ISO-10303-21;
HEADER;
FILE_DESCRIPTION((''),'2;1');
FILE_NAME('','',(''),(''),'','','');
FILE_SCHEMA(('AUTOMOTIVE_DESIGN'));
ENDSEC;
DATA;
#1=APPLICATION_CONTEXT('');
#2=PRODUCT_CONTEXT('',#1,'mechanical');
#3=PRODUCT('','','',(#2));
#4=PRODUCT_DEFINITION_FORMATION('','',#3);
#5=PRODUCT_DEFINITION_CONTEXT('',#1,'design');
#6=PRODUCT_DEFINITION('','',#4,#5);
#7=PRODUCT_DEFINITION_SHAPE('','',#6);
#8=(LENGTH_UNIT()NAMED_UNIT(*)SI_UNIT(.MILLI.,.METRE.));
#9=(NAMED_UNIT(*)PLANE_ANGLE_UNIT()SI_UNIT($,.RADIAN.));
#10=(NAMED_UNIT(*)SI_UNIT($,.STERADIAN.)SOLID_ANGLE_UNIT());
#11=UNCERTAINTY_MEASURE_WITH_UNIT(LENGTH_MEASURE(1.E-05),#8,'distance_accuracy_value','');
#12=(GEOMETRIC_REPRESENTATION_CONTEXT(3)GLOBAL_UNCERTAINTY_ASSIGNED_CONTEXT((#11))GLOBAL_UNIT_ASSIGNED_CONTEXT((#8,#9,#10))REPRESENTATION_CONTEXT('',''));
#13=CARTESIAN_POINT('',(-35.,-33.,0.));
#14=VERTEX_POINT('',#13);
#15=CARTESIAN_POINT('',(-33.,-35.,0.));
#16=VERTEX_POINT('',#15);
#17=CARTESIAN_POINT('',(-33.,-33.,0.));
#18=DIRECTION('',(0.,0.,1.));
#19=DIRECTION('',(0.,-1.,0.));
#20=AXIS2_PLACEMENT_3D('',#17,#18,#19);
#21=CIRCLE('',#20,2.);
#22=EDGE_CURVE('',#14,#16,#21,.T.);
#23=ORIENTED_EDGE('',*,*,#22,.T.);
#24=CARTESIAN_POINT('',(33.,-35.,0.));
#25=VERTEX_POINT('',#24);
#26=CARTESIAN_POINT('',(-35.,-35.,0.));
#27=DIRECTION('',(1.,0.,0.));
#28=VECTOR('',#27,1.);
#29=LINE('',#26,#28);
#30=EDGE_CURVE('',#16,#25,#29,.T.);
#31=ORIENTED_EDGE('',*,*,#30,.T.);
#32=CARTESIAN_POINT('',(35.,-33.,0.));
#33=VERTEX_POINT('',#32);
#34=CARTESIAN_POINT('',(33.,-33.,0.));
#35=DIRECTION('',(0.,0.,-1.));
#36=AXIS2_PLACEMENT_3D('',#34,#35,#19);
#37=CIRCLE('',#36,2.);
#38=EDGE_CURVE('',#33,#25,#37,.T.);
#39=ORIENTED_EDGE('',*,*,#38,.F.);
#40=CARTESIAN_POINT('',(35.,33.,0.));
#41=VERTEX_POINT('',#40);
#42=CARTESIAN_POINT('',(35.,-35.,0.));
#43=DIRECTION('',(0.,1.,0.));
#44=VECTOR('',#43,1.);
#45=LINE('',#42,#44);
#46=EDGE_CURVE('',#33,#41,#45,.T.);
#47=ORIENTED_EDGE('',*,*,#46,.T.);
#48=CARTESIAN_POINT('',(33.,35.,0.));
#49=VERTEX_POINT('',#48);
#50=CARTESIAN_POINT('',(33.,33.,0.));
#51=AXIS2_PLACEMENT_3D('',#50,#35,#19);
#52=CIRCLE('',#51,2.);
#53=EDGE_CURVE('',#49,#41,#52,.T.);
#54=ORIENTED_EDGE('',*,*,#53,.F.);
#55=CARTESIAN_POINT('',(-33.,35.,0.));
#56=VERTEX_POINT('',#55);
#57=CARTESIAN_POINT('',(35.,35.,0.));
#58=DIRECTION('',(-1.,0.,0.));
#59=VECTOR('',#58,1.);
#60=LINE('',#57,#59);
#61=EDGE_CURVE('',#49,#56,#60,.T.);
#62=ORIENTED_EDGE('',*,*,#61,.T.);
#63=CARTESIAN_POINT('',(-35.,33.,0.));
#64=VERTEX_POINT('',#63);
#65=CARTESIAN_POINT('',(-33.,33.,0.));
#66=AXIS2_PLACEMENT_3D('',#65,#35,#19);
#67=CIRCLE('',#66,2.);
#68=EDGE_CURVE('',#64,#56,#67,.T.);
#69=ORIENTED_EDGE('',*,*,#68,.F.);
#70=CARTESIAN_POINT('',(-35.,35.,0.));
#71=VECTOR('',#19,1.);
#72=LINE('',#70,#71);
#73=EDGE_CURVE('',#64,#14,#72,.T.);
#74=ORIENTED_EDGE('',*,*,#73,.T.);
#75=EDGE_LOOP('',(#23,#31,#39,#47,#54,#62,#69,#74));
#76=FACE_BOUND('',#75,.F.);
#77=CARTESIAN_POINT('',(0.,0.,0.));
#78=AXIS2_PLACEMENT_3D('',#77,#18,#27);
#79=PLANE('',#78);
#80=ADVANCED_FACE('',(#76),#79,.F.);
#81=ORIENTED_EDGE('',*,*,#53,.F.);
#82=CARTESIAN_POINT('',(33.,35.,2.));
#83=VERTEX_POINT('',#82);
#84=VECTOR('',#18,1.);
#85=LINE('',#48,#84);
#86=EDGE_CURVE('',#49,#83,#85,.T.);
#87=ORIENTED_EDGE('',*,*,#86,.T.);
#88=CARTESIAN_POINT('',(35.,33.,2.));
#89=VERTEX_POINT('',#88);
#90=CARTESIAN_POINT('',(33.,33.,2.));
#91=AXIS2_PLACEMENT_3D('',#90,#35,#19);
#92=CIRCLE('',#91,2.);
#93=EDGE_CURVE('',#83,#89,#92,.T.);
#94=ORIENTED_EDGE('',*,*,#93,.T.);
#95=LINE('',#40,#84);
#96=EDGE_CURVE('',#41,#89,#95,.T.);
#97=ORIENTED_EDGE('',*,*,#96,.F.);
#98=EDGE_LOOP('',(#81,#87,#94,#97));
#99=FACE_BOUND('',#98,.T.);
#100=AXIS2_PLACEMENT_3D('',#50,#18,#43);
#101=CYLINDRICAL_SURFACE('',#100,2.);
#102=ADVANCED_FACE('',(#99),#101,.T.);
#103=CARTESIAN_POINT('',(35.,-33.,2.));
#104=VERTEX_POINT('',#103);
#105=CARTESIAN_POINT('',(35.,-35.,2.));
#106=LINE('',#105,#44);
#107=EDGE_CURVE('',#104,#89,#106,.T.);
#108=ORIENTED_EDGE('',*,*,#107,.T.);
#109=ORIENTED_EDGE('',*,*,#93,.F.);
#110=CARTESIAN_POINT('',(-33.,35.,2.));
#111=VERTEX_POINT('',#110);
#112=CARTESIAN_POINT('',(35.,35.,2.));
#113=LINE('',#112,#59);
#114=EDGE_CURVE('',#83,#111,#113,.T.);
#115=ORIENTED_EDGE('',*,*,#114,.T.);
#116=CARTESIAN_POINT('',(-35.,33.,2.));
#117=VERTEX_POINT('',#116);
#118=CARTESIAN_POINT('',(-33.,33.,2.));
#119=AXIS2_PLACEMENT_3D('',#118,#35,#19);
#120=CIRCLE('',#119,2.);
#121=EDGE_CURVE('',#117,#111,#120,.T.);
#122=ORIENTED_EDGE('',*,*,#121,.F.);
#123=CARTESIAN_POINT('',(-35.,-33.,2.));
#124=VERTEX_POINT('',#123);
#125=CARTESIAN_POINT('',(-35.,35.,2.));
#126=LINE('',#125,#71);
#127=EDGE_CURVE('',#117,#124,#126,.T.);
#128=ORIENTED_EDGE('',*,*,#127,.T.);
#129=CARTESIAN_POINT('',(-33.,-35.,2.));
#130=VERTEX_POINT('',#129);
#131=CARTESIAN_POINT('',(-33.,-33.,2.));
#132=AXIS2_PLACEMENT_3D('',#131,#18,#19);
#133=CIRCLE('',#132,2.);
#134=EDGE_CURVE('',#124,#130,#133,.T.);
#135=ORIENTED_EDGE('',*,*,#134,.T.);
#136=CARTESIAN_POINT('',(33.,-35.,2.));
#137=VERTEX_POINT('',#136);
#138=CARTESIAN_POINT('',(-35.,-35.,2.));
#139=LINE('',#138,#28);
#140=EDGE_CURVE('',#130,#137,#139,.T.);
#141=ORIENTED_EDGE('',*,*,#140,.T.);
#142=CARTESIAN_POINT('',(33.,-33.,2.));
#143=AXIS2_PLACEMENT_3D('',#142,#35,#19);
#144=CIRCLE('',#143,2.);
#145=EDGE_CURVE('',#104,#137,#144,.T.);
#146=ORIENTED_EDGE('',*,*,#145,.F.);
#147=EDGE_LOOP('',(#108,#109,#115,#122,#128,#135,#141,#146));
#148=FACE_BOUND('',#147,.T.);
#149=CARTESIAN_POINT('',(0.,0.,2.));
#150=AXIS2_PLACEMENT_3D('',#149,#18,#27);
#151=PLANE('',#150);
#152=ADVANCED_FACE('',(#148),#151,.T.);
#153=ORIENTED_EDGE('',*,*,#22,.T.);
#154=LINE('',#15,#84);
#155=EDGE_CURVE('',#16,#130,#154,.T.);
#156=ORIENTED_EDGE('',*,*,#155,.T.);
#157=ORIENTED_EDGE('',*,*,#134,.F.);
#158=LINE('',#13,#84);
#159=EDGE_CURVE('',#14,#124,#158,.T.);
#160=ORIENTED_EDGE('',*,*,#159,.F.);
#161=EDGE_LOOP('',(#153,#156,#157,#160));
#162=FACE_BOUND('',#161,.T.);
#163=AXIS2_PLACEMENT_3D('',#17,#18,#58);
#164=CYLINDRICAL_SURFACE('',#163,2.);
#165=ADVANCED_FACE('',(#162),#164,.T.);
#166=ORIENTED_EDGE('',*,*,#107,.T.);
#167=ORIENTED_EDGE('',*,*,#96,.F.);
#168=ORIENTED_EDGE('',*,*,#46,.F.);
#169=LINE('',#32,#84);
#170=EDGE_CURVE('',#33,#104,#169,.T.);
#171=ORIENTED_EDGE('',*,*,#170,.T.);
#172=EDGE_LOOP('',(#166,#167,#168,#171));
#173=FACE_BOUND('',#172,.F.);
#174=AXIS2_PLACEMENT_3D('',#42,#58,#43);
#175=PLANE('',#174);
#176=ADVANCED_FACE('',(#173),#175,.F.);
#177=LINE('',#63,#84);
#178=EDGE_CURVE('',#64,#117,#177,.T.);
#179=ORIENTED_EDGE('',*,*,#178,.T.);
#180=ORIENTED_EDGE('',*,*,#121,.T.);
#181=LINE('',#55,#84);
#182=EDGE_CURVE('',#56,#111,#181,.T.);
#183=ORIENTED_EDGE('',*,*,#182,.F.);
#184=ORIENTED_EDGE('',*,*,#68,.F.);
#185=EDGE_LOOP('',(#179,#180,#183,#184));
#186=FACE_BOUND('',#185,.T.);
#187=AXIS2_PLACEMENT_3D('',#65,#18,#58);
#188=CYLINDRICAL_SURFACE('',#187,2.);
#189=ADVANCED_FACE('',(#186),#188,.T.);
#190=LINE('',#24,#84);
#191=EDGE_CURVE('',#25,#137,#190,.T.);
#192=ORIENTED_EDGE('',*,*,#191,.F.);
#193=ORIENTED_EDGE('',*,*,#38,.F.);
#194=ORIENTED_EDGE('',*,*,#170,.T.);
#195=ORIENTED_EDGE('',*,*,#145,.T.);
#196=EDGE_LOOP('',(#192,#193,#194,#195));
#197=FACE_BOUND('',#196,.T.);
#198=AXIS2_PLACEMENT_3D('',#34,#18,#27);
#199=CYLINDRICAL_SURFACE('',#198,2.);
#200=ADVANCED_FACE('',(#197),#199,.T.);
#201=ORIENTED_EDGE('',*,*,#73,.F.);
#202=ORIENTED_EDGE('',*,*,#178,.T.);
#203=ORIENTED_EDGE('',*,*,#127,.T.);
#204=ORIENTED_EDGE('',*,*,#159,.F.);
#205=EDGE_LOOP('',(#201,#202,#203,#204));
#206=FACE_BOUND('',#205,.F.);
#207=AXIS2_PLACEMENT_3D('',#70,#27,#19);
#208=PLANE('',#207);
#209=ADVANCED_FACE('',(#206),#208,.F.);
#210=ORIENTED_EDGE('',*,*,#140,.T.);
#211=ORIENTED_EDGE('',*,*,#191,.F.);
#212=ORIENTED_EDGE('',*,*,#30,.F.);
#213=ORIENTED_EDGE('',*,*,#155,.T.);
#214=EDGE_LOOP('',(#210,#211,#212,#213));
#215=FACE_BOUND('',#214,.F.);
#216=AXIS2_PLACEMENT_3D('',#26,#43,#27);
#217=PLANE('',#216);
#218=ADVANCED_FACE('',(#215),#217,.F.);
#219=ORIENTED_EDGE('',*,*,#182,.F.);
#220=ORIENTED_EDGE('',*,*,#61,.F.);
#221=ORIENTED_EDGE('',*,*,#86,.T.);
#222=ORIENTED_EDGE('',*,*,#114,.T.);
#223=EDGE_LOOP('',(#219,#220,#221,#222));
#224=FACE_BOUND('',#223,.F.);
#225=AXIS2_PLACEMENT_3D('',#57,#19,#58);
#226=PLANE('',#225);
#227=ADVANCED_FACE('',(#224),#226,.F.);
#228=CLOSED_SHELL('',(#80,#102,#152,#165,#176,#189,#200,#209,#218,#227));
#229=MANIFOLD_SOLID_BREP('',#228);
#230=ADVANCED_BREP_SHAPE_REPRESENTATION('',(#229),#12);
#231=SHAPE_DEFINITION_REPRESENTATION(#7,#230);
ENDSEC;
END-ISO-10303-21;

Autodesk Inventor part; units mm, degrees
ref_plane "YZ Plane" through (0, 0, 0) normal (1, 0, 0) x (0, 1, 0)
ref_plane "XZ Plane" through (0, 0, 0) normal (0, 1, 0) x (-1, 0, 0)
ref_plane "XY Plane" through (0, 0, 0) normal (0, 0, 1) x (1, 0, 0)
sketch "Sketch1" plane through (0, 0, 0) normal (0, 0, 1) x (1, 0, 0)
  line L0 (-35, -35) -> (35, -35)
  line L1 (35, -35) -> (35, 35)
  line L2 (35, 35) -> (-35, 35)
  line L3 (-35, 35) -> (-35, -35)
  line L4 (-35, -35) -> (35, 35) construction
  line L5 (35, -35) -> (-35, 35) construction
  point P0 (0, 0)
  dimension "d154" = 70
  dimension "d155" = 70
extrude "Plate5" add sketch "Sketch1" along normal blind 2
fillet "Corner Round1" radius 2 4 edges at (35, 35, 1) (-35, -35, 1) (-35, 35, 1) (35, -35, 1)
sketch "Sketch11" plane through (-50.5, -22, -28) normal (1, 0, 0) x (0, 0, -1)
  line L0 (-25.25, 44) -> (-25.25, 0) construction
  line L1 (0, 0) -> (-25.25, 0) construction
  line L2 (0, 0) -> (0, 44) construction
  line L3 (0, 44) -> (-25.25, 44) construction
  circle A0 centre (-10, 22) radius 5.5
  point P0 (-28, 22)
  point P1 (0, 22)
  dimension "d192" = 11
  dimension "d193" = 10
cut "Cut3" [suppressed]
feature "Corner Round3" [suppressed]
sketch "Sketch10" plane through (-37, 33, 2) normal (1, 0, 0) x (0, 1, 0)
  line L0 (-66, 0) -> (0, 0)
  line L1 (0, 0) -> (0, -30)
  line L2 (0, -30) -> (-66, -30)
  line L3 (-66, -30) -> (-66, 0)
properties part number "PRS 1424 DrSysB diam way cup_D1200" material "Stainless Steel"
